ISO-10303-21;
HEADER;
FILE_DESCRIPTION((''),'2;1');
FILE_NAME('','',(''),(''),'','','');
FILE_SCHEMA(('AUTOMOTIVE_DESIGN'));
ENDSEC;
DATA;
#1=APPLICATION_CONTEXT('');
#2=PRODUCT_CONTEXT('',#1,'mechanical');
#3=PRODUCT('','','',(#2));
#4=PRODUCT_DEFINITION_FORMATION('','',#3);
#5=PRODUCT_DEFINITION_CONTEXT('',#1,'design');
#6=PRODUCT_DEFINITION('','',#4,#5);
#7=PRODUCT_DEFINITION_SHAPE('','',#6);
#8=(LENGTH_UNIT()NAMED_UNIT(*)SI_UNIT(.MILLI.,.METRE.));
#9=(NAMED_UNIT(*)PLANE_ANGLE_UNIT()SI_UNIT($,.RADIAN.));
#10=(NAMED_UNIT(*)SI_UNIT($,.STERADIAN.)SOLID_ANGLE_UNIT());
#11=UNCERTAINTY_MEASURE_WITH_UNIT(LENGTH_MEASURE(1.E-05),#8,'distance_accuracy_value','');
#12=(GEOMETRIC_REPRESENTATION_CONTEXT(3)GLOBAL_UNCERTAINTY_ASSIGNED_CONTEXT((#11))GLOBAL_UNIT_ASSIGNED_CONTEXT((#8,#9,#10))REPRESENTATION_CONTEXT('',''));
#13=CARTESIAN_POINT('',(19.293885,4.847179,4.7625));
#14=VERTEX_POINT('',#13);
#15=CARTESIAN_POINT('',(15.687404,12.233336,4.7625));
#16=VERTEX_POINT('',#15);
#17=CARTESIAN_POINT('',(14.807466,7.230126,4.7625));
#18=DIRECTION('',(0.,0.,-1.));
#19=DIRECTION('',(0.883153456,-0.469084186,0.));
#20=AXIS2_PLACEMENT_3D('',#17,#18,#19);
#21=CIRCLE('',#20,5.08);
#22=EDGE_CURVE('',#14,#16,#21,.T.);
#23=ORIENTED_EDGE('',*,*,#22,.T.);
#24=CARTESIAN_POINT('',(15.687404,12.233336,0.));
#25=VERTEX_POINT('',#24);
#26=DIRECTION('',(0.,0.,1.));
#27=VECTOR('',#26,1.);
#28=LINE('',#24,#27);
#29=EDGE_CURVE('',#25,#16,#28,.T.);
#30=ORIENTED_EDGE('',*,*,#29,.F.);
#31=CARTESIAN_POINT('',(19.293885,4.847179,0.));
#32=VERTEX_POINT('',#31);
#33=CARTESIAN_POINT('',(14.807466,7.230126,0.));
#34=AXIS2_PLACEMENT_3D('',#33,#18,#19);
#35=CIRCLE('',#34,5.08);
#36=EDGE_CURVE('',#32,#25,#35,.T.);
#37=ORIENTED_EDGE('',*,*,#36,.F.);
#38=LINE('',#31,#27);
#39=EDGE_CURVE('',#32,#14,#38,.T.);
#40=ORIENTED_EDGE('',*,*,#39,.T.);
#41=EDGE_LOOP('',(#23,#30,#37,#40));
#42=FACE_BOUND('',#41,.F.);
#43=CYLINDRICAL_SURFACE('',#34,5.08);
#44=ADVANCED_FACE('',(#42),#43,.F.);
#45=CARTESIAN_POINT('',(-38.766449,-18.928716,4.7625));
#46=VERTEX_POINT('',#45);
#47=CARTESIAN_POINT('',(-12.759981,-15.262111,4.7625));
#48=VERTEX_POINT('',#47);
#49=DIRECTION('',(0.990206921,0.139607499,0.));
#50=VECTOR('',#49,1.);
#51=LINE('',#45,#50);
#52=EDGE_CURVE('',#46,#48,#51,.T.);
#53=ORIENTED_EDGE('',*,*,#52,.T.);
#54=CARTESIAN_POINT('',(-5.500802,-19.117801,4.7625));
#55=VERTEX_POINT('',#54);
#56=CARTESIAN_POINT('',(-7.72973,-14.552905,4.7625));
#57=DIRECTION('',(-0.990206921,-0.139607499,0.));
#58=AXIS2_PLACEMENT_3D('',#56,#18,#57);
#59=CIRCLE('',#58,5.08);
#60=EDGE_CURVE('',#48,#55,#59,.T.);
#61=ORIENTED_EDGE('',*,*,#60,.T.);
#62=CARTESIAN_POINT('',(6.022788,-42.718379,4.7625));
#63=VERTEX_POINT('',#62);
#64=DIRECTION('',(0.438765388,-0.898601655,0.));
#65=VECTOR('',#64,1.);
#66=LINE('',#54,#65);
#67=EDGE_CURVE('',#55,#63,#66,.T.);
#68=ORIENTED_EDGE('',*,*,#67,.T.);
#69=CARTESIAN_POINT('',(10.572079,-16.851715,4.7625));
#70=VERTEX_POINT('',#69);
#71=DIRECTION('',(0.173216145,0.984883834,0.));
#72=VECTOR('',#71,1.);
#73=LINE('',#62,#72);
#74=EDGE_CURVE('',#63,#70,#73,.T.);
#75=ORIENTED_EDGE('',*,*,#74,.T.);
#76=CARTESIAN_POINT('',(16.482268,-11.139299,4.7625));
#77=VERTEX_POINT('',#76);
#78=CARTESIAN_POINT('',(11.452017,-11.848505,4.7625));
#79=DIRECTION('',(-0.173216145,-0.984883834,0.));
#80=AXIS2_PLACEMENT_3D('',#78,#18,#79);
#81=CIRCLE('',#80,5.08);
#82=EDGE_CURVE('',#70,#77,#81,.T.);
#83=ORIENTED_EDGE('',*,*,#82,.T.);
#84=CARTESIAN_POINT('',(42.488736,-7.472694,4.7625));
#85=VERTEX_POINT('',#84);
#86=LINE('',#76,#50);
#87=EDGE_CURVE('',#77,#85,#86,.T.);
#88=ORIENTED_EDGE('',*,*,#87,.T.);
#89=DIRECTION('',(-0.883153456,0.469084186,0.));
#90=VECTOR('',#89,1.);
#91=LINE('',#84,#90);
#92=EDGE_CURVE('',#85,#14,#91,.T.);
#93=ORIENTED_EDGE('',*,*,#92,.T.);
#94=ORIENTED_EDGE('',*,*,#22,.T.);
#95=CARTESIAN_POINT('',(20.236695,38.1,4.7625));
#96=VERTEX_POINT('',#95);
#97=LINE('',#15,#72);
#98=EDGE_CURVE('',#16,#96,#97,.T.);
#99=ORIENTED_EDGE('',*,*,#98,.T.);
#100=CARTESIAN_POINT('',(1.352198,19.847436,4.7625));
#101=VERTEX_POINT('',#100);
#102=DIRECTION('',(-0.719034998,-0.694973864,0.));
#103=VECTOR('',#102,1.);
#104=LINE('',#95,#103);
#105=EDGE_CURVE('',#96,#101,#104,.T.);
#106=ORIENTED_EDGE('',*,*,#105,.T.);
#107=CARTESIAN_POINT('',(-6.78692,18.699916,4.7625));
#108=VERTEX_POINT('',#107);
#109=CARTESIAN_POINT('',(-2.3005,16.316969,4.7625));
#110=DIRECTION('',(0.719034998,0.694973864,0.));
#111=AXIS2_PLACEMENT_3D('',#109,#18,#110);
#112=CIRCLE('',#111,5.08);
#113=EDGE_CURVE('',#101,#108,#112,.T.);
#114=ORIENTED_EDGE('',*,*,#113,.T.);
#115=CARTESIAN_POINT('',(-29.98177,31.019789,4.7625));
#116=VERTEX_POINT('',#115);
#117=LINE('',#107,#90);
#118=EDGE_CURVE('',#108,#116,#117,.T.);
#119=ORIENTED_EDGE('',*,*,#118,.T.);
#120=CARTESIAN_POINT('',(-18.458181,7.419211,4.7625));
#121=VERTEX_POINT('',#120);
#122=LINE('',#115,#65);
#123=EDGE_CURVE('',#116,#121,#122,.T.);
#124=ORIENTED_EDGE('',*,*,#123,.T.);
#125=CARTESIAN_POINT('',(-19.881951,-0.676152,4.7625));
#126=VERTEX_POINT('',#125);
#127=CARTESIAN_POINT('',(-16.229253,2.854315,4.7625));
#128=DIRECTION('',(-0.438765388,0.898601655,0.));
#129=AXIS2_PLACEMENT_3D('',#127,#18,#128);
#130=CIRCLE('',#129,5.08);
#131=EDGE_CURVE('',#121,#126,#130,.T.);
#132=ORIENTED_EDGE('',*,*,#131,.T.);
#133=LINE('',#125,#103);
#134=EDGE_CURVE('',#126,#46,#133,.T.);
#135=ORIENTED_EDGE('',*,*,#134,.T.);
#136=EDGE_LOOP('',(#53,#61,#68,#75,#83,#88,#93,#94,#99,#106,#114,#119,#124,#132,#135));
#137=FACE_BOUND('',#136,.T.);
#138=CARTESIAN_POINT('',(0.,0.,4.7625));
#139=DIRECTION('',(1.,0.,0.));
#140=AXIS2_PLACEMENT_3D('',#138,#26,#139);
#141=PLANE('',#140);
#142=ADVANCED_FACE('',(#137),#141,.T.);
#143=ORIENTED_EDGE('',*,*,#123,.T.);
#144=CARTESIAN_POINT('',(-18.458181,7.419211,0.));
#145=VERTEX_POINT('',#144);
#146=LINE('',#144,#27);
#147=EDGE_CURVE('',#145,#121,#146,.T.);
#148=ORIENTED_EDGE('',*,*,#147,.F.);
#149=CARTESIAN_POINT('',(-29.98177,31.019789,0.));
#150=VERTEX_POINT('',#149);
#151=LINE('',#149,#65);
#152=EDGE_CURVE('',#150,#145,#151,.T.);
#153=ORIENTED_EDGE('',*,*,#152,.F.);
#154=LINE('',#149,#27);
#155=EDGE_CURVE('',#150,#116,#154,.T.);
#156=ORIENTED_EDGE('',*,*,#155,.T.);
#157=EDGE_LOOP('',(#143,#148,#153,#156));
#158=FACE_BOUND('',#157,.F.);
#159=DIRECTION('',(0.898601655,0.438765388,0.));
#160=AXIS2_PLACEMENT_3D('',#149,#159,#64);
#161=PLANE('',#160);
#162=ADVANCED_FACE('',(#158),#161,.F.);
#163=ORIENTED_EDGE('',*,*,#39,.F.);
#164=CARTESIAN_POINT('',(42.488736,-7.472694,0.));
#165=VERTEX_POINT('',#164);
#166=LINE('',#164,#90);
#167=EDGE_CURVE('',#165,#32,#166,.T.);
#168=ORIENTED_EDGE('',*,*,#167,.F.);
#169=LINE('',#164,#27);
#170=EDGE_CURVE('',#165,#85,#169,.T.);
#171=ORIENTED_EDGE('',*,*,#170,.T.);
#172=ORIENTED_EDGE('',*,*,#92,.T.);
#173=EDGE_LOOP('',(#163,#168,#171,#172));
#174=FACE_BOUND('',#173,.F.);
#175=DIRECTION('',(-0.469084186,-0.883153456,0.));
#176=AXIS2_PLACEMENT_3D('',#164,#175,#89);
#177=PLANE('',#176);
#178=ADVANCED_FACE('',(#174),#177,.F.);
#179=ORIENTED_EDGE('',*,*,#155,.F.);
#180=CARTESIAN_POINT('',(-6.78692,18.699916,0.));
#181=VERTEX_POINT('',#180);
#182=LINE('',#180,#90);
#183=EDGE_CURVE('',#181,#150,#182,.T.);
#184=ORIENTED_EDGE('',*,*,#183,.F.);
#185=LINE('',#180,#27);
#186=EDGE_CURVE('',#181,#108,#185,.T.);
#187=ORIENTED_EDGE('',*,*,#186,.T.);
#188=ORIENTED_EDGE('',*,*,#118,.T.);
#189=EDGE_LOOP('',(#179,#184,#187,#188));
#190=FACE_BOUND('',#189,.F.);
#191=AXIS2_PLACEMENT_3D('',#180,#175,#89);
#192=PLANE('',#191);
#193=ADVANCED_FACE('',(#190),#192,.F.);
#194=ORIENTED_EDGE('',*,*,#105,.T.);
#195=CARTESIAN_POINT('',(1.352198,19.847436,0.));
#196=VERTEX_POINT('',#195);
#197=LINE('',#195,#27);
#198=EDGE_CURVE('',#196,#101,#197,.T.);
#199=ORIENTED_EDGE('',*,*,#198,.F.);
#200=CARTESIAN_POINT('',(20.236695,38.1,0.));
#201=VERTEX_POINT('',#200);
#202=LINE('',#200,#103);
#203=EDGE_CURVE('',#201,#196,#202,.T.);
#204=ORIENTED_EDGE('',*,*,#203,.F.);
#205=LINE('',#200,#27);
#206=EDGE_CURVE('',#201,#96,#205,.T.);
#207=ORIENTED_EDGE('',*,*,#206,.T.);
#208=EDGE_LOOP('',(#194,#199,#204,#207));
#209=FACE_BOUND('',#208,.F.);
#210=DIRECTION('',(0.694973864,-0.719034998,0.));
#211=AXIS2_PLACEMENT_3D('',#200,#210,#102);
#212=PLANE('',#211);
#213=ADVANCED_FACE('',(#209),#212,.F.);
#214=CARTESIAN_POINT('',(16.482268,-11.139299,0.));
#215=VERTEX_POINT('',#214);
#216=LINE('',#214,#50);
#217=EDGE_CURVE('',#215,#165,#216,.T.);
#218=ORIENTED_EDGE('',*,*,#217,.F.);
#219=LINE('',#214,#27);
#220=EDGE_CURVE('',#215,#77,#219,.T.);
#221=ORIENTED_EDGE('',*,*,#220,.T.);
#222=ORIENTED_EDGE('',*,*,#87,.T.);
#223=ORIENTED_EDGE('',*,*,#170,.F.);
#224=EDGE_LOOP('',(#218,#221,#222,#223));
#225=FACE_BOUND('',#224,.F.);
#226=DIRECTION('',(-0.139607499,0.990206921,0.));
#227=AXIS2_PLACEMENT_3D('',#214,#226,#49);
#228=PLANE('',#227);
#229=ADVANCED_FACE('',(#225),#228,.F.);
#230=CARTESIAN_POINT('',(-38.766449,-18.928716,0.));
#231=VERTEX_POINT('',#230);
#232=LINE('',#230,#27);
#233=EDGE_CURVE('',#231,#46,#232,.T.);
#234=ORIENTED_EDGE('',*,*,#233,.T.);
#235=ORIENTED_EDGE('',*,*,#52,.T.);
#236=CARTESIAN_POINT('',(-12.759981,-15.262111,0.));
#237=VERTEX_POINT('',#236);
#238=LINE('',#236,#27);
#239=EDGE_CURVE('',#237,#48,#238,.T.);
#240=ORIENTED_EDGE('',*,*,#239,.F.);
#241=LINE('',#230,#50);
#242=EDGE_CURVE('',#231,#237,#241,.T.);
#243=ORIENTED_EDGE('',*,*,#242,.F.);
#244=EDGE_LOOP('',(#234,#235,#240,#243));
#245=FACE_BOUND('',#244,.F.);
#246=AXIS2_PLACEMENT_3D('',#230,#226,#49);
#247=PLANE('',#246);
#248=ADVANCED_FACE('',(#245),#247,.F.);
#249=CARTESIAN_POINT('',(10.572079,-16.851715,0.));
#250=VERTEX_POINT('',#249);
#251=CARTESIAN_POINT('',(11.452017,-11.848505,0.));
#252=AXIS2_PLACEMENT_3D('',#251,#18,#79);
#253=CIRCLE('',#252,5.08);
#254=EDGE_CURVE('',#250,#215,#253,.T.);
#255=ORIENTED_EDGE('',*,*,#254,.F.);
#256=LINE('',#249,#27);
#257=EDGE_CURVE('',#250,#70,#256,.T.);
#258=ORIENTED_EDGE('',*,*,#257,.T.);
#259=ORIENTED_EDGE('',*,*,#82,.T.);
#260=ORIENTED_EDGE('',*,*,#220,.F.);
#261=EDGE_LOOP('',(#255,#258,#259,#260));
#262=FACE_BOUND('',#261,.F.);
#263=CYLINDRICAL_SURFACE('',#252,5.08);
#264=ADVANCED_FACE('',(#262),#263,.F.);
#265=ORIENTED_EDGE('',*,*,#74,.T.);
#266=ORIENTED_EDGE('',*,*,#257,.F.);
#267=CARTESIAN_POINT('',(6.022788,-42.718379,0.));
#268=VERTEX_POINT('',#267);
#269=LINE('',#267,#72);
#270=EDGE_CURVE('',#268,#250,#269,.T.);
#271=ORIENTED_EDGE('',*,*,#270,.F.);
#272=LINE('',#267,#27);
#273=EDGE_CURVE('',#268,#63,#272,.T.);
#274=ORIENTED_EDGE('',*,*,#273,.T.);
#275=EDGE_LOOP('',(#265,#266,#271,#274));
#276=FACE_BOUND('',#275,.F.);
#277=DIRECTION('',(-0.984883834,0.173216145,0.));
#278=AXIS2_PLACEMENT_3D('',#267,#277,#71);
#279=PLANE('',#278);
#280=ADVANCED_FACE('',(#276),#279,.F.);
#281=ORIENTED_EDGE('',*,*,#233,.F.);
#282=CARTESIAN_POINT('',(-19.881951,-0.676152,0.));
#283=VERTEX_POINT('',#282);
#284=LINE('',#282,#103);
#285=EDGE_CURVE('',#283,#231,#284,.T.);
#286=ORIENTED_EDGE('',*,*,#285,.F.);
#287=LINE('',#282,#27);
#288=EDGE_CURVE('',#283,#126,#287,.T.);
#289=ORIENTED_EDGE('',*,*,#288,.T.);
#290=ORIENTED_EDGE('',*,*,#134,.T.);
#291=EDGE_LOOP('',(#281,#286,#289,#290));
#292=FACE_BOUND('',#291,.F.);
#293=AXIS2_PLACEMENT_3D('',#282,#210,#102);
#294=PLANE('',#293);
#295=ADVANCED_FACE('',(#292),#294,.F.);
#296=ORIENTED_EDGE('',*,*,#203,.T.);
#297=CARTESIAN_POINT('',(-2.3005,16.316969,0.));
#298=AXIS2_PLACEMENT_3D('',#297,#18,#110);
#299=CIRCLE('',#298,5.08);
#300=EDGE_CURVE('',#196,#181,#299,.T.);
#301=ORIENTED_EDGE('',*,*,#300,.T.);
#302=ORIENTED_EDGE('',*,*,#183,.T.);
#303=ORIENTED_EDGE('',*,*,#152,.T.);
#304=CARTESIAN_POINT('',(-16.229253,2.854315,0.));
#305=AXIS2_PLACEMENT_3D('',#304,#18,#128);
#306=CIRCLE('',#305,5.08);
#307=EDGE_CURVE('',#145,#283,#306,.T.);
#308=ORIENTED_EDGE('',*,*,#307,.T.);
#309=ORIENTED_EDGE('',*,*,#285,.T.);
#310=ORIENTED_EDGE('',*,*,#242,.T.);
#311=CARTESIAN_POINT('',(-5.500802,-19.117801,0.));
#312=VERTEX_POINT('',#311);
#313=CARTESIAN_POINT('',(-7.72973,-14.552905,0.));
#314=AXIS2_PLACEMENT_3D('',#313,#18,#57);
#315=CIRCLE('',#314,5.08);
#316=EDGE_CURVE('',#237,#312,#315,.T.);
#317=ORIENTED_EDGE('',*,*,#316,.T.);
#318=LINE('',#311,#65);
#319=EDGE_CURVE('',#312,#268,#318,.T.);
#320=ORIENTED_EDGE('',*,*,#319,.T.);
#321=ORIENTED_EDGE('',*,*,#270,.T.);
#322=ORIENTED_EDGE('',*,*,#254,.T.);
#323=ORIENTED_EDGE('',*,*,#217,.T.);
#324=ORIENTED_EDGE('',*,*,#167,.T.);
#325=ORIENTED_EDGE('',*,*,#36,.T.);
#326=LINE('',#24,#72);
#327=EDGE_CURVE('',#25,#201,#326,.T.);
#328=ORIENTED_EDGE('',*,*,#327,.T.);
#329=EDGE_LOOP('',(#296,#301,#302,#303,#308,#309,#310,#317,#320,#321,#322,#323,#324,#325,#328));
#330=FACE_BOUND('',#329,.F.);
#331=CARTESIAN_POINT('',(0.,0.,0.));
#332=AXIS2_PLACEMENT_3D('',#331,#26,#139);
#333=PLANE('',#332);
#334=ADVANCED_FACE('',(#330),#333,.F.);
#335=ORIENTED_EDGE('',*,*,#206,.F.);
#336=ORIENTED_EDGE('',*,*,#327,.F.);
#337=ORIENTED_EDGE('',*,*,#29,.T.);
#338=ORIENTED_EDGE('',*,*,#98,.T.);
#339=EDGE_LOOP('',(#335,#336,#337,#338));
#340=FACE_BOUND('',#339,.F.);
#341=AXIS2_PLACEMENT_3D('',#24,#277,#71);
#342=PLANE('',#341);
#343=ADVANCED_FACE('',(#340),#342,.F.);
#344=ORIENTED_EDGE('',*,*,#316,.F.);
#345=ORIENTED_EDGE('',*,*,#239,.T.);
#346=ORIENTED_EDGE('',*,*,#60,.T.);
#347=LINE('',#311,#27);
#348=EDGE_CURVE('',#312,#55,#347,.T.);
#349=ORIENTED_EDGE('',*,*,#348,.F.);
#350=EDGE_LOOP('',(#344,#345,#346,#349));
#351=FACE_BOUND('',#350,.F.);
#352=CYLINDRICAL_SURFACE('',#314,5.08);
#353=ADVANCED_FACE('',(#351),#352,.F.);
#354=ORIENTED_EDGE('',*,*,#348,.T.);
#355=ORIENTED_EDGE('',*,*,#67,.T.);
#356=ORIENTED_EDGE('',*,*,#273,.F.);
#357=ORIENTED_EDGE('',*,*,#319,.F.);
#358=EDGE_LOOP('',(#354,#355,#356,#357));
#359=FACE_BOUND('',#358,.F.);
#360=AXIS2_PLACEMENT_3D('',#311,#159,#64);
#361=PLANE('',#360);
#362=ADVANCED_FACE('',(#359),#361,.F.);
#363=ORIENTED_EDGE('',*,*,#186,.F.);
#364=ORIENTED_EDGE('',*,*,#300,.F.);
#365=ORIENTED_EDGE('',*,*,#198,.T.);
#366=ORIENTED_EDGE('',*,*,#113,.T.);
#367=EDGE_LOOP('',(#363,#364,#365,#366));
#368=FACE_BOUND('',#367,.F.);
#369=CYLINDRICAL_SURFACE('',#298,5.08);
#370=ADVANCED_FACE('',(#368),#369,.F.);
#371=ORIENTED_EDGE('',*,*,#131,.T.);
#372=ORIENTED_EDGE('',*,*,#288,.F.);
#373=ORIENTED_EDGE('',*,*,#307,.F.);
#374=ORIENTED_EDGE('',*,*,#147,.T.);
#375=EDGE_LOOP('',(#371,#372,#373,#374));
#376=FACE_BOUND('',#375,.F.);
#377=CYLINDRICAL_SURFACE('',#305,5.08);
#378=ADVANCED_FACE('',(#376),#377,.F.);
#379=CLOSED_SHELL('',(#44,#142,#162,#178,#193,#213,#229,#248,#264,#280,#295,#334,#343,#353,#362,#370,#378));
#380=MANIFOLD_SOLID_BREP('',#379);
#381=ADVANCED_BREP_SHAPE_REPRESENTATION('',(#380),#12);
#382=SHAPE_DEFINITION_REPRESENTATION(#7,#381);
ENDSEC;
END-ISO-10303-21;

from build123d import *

# Parameters (mm, degrees)
F1_DEPTH = 4.7625


# Not quite as in the source:
# - a feature of the source that left no trace in its solid (it failed there, or was rolled back) is left out


with BuildPart() as f1:
    # F0 (on Top) → F1 (new body)
    with BuildSketch(Plane.XY):
        with BuildLine():
            Line((-6.7869197201, 18.6999163445), (-29.9817704813, 31.019788517))
            Line((-29.9817704813, 31.019788517), (-18.4581812066, 7.4192113543))
            ThreePointArc((-18.4581812066, 7.4192113543), (-11.2260431578, 1.9743769297), (-19.8819508265, -0.6761522815))
            Line((-19.8819508265, -0.6761522815), (-38.7664486034, -18.9287163727))
            Line((-38.7664486034, -18.9287163727), (-12.7599809824, -15.2621111222))
            ThreePointArc((-12.7599809824, -15.2621111222), (-5.3467821599, -10.0664854729), (-5.5008016534, -19.117801436))
            Line((-5.5008016534, -19.117801436), (6.0227876213, -42.7183785987))
            Line((6.0227876213, -42.7183785987), (10.5720792637, -16.8517147679))
            ThreePointArc((10.5720792637, -16.8517147679), (7.9215500525, -8.1958070991), (16.4822684394, -11.1392987961))
            Line((16.4822684394, -11.1392987961), (42.4887360604, -7.4726935456))
            Line((42.4887360604, -7.4726935456), (19.2938852991, 4.8471786269))
            ThreePointArc((19.2938852991, 4.8471786269), (10.242569336, 5.0011981203), (15.6874037606, 12.2333361692))
            Line((15.6874037606, 12.2333361692), (20.236695403, 38.1))
            Line((20.236695403, 38.1), (1.3521976262, 19.8474359089))
            ThreePointArc((1.3521976262, 19.8474359089), (-1.5912940708, 11.286717522), (-6.7869197201, 18.6999163445))
        make_face()
    extrude(amount=F1_DEPTH)


solid = f1.part
